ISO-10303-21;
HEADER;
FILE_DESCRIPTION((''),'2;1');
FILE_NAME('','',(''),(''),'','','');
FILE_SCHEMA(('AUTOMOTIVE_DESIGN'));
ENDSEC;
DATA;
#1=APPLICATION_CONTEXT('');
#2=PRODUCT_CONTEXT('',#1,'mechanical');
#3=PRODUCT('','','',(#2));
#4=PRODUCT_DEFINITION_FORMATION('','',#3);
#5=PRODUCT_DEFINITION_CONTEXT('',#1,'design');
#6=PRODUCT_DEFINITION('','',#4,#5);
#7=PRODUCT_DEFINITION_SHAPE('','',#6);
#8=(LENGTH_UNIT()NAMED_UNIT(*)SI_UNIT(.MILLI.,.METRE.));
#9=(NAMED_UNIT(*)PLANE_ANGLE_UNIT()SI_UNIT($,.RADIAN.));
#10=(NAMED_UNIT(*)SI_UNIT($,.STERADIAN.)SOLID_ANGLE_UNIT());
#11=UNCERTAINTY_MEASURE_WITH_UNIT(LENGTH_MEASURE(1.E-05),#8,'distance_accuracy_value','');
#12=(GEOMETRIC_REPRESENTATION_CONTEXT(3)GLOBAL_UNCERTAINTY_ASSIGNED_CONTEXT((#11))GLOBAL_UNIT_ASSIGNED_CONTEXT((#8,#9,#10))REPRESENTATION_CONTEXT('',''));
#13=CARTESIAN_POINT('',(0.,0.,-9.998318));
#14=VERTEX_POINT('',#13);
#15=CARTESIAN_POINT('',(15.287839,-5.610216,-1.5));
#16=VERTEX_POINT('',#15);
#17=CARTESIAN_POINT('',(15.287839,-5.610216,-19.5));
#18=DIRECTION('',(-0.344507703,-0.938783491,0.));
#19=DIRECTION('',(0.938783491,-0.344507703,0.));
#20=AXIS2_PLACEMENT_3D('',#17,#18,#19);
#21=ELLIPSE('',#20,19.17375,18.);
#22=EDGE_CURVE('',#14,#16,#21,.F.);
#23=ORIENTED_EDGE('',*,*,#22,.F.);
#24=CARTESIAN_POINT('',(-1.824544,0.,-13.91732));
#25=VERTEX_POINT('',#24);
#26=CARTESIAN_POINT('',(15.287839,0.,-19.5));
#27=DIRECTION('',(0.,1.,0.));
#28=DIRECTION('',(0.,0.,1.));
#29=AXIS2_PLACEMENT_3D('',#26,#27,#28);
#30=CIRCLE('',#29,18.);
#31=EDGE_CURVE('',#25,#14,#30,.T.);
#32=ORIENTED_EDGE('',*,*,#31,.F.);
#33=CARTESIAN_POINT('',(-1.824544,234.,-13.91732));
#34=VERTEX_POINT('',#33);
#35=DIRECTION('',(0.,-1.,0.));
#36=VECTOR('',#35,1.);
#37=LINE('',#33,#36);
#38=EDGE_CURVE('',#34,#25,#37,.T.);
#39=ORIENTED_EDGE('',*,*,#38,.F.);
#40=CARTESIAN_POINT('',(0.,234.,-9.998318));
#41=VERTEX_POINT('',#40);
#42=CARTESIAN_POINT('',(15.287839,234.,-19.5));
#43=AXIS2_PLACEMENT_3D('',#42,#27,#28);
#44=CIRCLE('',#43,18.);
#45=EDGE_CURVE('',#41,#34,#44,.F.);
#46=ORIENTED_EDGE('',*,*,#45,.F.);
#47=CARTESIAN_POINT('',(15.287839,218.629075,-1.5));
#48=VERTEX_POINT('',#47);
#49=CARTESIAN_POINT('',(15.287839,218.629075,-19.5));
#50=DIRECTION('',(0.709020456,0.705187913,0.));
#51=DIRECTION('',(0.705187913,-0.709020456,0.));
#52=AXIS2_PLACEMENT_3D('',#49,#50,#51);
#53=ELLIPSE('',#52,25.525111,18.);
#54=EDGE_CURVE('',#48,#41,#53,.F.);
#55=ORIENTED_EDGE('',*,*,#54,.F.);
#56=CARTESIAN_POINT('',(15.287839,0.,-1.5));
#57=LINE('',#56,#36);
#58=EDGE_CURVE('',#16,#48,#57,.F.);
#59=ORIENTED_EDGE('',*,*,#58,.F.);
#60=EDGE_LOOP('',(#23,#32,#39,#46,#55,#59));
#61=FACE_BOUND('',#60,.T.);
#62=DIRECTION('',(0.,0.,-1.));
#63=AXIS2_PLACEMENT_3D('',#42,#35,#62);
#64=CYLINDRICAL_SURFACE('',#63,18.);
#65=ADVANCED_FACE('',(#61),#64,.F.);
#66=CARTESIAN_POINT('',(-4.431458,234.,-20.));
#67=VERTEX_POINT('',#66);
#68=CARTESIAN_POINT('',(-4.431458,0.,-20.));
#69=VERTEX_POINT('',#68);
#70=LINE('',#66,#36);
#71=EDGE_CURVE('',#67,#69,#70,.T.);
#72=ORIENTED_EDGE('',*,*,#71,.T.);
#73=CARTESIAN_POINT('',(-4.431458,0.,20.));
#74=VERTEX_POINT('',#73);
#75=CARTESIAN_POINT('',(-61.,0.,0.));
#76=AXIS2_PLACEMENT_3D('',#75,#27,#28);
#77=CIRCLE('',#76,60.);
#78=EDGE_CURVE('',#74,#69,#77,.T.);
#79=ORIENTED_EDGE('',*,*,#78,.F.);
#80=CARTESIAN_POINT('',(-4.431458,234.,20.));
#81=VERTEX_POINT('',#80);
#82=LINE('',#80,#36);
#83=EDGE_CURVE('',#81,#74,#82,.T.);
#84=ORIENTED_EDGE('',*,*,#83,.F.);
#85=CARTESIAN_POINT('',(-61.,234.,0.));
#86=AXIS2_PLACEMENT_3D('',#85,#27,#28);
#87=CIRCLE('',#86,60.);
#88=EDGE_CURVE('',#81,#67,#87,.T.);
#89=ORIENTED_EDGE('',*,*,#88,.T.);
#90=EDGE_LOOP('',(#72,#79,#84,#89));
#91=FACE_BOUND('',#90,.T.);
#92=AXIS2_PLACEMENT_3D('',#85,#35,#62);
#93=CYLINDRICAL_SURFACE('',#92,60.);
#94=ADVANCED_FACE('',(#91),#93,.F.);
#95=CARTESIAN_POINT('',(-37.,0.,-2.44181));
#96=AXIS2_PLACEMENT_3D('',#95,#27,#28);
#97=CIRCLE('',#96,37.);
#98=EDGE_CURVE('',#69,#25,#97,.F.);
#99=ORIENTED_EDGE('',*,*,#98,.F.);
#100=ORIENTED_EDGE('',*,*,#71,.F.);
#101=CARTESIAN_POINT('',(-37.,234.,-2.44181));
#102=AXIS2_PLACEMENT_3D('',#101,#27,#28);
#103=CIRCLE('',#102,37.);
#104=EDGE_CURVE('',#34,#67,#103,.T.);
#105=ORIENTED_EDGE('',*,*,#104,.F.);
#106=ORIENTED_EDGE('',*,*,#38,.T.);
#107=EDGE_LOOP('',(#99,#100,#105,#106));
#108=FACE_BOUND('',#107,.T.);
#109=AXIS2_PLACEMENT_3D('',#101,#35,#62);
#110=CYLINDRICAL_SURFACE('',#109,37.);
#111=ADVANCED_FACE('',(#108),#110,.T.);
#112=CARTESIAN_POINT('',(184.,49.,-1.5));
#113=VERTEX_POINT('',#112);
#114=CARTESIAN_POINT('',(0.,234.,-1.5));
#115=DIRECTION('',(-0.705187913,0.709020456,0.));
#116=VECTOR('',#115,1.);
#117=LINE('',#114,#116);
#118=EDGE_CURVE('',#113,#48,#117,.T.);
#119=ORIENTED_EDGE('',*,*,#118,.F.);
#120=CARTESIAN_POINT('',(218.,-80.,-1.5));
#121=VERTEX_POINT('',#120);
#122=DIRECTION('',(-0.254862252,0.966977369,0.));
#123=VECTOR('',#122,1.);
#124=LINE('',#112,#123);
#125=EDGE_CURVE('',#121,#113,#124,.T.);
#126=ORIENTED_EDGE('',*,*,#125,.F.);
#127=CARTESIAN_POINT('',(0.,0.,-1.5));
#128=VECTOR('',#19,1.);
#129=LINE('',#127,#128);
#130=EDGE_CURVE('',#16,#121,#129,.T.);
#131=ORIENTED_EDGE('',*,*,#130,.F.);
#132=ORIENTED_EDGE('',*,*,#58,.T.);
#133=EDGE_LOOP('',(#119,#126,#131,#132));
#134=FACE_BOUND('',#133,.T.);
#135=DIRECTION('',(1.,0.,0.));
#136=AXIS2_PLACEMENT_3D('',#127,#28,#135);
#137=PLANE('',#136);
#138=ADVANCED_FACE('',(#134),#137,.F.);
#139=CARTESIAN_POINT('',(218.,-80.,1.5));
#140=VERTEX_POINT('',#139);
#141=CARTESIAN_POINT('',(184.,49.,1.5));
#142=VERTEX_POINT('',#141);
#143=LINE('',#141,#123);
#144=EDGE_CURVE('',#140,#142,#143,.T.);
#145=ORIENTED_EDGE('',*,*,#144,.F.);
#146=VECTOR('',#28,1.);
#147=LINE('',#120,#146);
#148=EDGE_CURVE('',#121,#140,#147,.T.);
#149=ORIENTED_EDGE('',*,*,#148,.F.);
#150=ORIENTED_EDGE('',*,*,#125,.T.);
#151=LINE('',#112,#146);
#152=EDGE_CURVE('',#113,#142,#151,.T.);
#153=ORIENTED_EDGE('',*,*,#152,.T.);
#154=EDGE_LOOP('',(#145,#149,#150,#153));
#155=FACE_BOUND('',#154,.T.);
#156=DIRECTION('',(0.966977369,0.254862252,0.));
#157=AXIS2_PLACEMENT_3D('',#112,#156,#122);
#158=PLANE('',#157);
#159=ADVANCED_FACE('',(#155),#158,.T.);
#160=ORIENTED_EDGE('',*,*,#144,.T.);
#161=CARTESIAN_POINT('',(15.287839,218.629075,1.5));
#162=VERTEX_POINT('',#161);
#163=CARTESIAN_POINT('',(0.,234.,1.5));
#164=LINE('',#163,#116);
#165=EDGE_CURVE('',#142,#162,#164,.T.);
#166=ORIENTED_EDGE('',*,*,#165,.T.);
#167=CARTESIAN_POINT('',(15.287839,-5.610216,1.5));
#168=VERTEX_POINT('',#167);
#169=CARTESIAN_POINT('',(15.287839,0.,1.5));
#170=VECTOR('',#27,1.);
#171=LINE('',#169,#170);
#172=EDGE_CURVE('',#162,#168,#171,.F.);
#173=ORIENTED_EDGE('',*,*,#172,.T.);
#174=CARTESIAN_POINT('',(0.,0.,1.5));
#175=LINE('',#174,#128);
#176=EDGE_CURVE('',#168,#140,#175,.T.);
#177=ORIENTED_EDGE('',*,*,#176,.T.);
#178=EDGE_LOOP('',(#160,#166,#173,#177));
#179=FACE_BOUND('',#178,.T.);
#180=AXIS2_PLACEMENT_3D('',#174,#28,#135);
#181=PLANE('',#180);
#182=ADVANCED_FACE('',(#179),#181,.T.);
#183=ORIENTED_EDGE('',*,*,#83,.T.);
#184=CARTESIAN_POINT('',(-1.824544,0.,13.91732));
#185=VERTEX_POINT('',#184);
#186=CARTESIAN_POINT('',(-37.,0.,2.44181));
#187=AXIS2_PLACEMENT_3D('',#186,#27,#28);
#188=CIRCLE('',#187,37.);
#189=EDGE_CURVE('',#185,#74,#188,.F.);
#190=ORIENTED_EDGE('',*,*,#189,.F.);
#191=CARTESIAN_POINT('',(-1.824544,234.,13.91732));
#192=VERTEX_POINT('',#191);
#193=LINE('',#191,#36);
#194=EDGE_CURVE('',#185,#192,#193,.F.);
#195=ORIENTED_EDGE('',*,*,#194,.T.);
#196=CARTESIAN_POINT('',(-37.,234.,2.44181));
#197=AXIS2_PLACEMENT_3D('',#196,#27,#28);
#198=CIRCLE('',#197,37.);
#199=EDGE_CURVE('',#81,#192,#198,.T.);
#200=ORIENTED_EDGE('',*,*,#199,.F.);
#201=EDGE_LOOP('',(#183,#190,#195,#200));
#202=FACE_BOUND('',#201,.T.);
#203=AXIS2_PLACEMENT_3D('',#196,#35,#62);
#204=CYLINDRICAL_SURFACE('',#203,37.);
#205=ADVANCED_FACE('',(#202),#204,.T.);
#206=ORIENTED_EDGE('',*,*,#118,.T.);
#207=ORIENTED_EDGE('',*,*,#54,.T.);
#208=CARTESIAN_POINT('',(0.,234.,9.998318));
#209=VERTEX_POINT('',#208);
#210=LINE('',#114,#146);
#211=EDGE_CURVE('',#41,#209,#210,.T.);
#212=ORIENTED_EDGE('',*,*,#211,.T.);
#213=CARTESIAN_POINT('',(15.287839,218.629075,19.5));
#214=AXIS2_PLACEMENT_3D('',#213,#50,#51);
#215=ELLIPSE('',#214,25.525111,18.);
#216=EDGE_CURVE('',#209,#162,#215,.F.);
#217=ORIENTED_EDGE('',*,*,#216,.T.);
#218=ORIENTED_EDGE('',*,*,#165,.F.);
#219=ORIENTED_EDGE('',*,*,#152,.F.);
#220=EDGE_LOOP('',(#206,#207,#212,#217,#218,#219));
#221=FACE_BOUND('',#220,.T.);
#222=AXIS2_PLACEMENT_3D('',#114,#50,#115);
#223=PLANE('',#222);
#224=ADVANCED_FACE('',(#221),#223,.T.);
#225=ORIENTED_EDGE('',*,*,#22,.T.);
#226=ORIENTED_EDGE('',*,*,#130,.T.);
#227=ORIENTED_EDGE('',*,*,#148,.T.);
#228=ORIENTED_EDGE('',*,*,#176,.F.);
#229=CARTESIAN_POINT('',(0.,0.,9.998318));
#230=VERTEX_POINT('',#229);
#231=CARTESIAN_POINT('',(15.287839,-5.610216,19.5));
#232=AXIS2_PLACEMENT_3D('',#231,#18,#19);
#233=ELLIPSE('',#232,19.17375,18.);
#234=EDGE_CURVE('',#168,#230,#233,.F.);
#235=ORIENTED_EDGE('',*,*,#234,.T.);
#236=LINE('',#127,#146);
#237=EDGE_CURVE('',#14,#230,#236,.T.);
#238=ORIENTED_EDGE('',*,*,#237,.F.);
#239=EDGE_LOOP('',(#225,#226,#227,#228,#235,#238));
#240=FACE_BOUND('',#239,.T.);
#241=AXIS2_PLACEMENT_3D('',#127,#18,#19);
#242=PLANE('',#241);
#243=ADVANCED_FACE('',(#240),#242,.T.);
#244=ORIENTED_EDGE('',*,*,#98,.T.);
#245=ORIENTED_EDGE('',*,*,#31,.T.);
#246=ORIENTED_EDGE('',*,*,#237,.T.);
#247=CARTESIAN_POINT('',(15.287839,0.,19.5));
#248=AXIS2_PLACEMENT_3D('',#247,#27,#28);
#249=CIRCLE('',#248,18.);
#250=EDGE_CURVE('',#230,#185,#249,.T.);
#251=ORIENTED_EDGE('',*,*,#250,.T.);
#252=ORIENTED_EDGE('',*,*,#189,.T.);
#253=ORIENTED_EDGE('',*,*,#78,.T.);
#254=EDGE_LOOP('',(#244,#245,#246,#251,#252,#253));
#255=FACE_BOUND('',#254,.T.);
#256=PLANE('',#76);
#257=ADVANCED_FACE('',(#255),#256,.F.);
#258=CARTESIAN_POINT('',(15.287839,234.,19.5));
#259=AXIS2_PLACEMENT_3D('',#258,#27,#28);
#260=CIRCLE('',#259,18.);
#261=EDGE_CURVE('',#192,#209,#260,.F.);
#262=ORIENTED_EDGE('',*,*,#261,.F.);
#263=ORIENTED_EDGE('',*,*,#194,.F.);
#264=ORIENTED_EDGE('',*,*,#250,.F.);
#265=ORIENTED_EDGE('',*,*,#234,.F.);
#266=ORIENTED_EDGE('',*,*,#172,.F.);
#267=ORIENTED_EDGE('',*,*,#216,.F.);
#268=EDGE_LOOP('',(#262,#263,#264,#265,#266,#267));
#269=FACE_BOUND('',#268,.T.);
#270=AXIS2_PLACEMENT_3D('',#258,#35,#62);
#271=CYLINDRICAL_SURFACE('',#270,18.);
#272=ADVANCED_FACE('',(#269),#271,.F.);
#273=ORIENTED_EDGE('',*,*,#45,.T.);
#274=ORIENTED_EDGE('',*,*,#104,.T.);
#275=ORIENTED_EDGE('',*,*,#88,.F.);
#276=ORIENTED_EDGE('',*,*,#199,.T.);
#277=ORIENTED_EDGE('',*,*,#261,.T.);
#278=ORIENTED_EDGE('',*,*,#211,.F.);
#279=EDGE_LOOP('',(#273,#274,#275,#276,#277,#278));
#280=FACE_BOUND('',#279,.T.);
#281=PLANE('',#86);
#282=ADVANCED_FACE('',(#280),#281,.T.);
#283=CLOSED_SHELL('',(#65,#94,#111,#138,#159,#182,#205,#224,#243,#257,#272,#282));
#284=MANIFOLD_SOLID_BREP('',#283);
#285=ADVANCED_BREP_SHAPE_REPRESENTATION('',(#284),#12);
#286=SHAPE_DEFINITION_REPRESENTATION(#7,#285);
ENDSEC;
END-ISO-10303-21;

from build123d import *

# Parameters (mm, degrees)
BOSS_EXTRUDE1_DEPTH      = 1.5
BOSS_EXTRUDE1_DEPTH_BACK = 1.5
BOSS_EXTRUDE2_DEPTH      = 234
FILLET1_R                = 37
FILLET2_R                = 37
FILLET3_R                = 18
FILLET4_R                = 18


with BuildPart() as part:
    # Sketch1 → Boss-Extrude1 (new, two sides: drawn at the far end of the back side and taken through both)
    with BuildSketch(Plane.XY.offset(-BOSS_EXTRUDE1_DEPTH_BACK)):
        Polygon((0, 0), (0, 234), (184, 49), (218, -80), align=None)
    extrude(amount=BOSS_EXTRUDE1_DEPTH + BOSS_EXTRUDE1_DEPTH_BACK)

    # Sketch3 → Boss-Extrude2 (add)
    with BuildSketch(Plane(origin=(0, 0, 0), x_dir=(1, 0, 0), z_dir=(0, 1, 0))):
        with BuildLine():
            Line((0, 0), (0, 20))
            Line((0, 20), (-4.431457505, 20))
            ThreePointArc((-4.431457505, 20), (-1, 0), (-4.431457505, -20))
            Line((-4.431457505, -20), (0, -20))
            Line((0, -20), (0, 0))
        make_face()
    extrude(amount=BOSS_EXTRUDE2_DEPTH)

    # Fillet1
    # the kernel refuses this fillet: 37 mm, written as the material it takes off along each edge
    with BuildSketch(Plane(origin=(0, -43.895475262, -20), x_dir=(-1, 0, 0), z_dir=(0, 1, 0))) as fillet1_piece_1:
        with BuildLine():
            CenterArc((37, 17.558190105), FILLET1_R, 180, 28.329773325)
            Line((0, 17.558190105), (-0.74, 17.558190105))
            Line((-0.74, 17.558190105), (-0.74, 0))
            Line((-0.74, 0), (0, -0.74))
            ThreePointArc((0, -0.74), (2.215728753, -0.74), (3.780086655, -0.351163802))
            Line((3.780086655, -0.351163802), (4.431457505, 0))
        make_face()
    extrude(amount=321.790950524, mode=Mode.SUBTRACT)

    # Fillet2
    # the kernel refuses this fillet: 37 mm, written as the material it takes off along each edge
    with BuildSketch(Plane(origin=(0, -43.895475262, 20), x_dir=(-1, 0, 0), z_dir=(0, 1, 0))) as fillet2_piece_1:
        with BuildLine():
            CenterArc((37, -17.558190105), FILLET2_R, 151.670226675, 28.329773325)
            Line((0, -17.558190105), (-0.74, -17.558190105))
            Line((-0.74, -17.558190105), (-0.74, 0))
            Line((-0.74, 0), (0, 0.74))
            ThreePointArc((0, 0.74), (2.215728753, 0.74), (3.780086655, 0.351163802))
            Line((3.780086655, 0.351163802), (4.431457505, 0))
        make_face()
    extrude(amount=321.790950524, mode=Mode.SUBTRACT)

    # Fillet3
    # the kernel refuses this fillet: 18 mm, written as the material it adds along each edge
    with BuildSketch(Plane(origin=(0, -38.219598529, 1.5), x_dir=(-0.1453745067000553, 0, 0.9893766991402797), z_dir=(0, 1, 0))) as fillet3_piece_1_section:
        with BuildLine():
            CenterArc((15.586318472, 17.742173215), FILLET3_R, 188.358966638, 71.931795215)
            Line((-2.222462113, 15.125432094), (-4.003340171, 14.863757982))
            Line((-4.003340171, 14.863757982), (-1.780878058, -0.261674112))
            Line((-1.780878058, -0.261674112), (0.261674112, -1.780878058))
            ThreePointArc((0.261674112, -1.780878058), (1.193478877, -1.64396291), (12.247081967, -1.774217321))
            Line((12.247081967, -1.774217321), (12.550648922, 0))
        make_face()
    fillet3_piece_1 = extrude(amount=272.219598529, mode=Mode.PRIVATE)
    fillet3_piece_1 = fillet3_piece_1 - Plane(origin=(-61, -0.93503603, 0), x_dir=(0.9428090415820632, 0, -0.3333333333333337), z_dir=(0, -1, 0)) * Cylinder(60, 605, mode=Mode.PRIVATE)
    fillet3_piece_1 = split(fillet3_piece_1, bisect_by=Plane(origin=(6.052795765, -2.221209455, 3.73592086), z_dir=(0.34450770303612605, 0.9387834907734437, 0)), keep=Keep.TOP, mode=Mode.PRIVATE)
    fillet3_piece_1 = split(fillet3_piece_1, bisect_by=Plane(origin=(120.710503396, 112.633461259, 3.73592086), z_dir=(-0.7090204561204898, -0.7051879131144355, 0)), keep=Keep.TOP, mode=Mode.PRIVATE)
    add(fillet3_piece_1)
    with BuildSketch(Plane(origin=(0, 0, 1.5), x_dir=(-0.14537450670005528, 0, 0.9893766991402797), z_dir=(0, 1, 0))) as fillet3_piece_2_section:
        with BuildLine():
            CenterArc((15.586318472, 17.742173215), FILLET3_R, 188.358966638, 71.931795215)
            Line((-2.222462113, 15.125432094), (-4.003340171, 14.863757982))
            Line((-4.003340171, 14.863757982), (-1.780878058, -0.261674112))
            Line((-1.780878058, -0.261674112), (0.261674112, -1.780878058))
            ThreePointArc((0.261674112, -1.780878058), (1.193478877, -1.64396291), (12.247081967, -1.774217321))
            Line((12.247081967, -1.774217321), (12.550648922, 0))
        make_face()
    fillet3_piece_2 = extrude(amount=272.219598529, mode=Mode.PRIVATE)
    fillet3_piece_2 = fillet3_piece_2 - Plane(origin=(-61, 0.334778788, 0), x_dir=(0.9428090415820632, 0, -0.3333333333333337), z_dir=(0, -1, 0)) * Cylinder(60, 605, mode=Mode.PRIVATE)
    fillet3_piece_2 = split(fillet3_piece_2, bisect_by=Plane(origin=(-1.045097549, 0.383522036, 11.887652285), z_dir=(-0.34450770303612605, -0.9387834907734437, 0)), keep=Keep.TOP, mode=Mode.PRIVATE)
    add(fillet3_piece_2)

    # Fillet4
    # the kernel refuses this fillet: 18 mm, written as the material it adds along each edge
    with BuildSketch(Plane(origin=(0, -38.219598529, -1.5), x_dir=(-0.14537450670005567, 0, -0.9893766991402797), z_dir=(0, 1, 0))) as fillet4_piece_1_section:
        with BuildLine():
            CenterArc((15.586318472, -17.742173215), FILLET4_R, 99.709238147, 71.931795215)
            Line((-2.222462113, -15.125432094), (-4.003340171, -14.863757982))
            Line((-4.003340171, -14.863757982), (-1.780878058, 0.261674112))
            Line((-1.780878058, 0.261674112), (0.261674112, 1.780878058))
            ThreePointArc((0.261674112, 1.780878058), (1.193478877, 1.64396291), (12.247081967, 1.774217321))
            Line((12.247081967, 1.774217321), (12.550648922, 0))
        make_face()
    fillet4_piece_1 = extrude(amount=272.219598529, mode=Mode.PRIVATE)
    fillet4_piece_1 = fillet4_piece_1 - Plane(origin=(-61, -0.93503603, 0), x_dir=(0.9428090415820632, 0, -0.3333333333333337), z_dir=(0, -1, 0)) * Cylinder(60, 605, mode=Mode.PRIVATE)
    fillet4_piece_1 = split(fillet4_piece_1, bisect_by=Plane(origin=(120.710503396, 112.633461259, -3.73592086), z_dir=(-0.709020456120464, -0.7051879131144615, 0)), keep=Keep.TOP, mode=Mode.PRIVATE)
    fillet4_piece_1 = split(fillet4_piece_1, bisect_by=Plane(origin=(6.052795765, -2.221209455, -3.73592086), z_dir=(0.34450770303615846, 0.9387834907734318, 0)), keep=Keep.TOP, mode=Mode.PRIVATE)
    add(fillet4_piece_1)
    with BuildSketch(Plane(origin=(0, 0, -1.5), x_dir=(-0.1453745067000557, 0, -0.9893766991402797), z_dir=(0, 1, 0))) as fillet4_piece_2_section:
        with BuildLine():
            CenterArc((15.586318472, -17.742173215), FILLET4_R, 99.709238147, 71.931795215)
            Line((-2.222462113, -15.125432094), (-4.003340171, -14.863757982))
            Line((-4.003340171, -14.863757982), (-1.780878058, 0.261674112))
            Line((-1.780878058, 0.261674112), (0.261674112, 1.780878058))
            ThreePointArc((0.261674112, 1.780878058), (1.193478877, 1.64396291), (12.247081967, 1.774217321))
            Line((12.247081967, 1.774217321), (12.550648922, 0))
        make_face()
    fillet4_piece_2 = extrude(amount=272.219598529, mode=Mode.PRIVATE)
    fillet4_piece_2 = fillet4_piece_2 - Plane(origin=(-61, 0.334778788, 0), x_dir=(0.9428090415820632, 0, -0.3333333333333337), z_dir=(0, -1, 0)) * Cylinder(60, 605, mode=Mode.PRIVATE)
    fillet4_piece_2 = split(fillet4_piece_2, bisect_by=Plane(origin=(-1.045097549, 0.383522036, -11.887652285), z_dir=(-0.34450770303615846, -0.9387834907734318, 0)), keep=Keep.TOP, mode=Mode.PRIVATE)
    add(fillet4_piece_2)


solid = part.part
